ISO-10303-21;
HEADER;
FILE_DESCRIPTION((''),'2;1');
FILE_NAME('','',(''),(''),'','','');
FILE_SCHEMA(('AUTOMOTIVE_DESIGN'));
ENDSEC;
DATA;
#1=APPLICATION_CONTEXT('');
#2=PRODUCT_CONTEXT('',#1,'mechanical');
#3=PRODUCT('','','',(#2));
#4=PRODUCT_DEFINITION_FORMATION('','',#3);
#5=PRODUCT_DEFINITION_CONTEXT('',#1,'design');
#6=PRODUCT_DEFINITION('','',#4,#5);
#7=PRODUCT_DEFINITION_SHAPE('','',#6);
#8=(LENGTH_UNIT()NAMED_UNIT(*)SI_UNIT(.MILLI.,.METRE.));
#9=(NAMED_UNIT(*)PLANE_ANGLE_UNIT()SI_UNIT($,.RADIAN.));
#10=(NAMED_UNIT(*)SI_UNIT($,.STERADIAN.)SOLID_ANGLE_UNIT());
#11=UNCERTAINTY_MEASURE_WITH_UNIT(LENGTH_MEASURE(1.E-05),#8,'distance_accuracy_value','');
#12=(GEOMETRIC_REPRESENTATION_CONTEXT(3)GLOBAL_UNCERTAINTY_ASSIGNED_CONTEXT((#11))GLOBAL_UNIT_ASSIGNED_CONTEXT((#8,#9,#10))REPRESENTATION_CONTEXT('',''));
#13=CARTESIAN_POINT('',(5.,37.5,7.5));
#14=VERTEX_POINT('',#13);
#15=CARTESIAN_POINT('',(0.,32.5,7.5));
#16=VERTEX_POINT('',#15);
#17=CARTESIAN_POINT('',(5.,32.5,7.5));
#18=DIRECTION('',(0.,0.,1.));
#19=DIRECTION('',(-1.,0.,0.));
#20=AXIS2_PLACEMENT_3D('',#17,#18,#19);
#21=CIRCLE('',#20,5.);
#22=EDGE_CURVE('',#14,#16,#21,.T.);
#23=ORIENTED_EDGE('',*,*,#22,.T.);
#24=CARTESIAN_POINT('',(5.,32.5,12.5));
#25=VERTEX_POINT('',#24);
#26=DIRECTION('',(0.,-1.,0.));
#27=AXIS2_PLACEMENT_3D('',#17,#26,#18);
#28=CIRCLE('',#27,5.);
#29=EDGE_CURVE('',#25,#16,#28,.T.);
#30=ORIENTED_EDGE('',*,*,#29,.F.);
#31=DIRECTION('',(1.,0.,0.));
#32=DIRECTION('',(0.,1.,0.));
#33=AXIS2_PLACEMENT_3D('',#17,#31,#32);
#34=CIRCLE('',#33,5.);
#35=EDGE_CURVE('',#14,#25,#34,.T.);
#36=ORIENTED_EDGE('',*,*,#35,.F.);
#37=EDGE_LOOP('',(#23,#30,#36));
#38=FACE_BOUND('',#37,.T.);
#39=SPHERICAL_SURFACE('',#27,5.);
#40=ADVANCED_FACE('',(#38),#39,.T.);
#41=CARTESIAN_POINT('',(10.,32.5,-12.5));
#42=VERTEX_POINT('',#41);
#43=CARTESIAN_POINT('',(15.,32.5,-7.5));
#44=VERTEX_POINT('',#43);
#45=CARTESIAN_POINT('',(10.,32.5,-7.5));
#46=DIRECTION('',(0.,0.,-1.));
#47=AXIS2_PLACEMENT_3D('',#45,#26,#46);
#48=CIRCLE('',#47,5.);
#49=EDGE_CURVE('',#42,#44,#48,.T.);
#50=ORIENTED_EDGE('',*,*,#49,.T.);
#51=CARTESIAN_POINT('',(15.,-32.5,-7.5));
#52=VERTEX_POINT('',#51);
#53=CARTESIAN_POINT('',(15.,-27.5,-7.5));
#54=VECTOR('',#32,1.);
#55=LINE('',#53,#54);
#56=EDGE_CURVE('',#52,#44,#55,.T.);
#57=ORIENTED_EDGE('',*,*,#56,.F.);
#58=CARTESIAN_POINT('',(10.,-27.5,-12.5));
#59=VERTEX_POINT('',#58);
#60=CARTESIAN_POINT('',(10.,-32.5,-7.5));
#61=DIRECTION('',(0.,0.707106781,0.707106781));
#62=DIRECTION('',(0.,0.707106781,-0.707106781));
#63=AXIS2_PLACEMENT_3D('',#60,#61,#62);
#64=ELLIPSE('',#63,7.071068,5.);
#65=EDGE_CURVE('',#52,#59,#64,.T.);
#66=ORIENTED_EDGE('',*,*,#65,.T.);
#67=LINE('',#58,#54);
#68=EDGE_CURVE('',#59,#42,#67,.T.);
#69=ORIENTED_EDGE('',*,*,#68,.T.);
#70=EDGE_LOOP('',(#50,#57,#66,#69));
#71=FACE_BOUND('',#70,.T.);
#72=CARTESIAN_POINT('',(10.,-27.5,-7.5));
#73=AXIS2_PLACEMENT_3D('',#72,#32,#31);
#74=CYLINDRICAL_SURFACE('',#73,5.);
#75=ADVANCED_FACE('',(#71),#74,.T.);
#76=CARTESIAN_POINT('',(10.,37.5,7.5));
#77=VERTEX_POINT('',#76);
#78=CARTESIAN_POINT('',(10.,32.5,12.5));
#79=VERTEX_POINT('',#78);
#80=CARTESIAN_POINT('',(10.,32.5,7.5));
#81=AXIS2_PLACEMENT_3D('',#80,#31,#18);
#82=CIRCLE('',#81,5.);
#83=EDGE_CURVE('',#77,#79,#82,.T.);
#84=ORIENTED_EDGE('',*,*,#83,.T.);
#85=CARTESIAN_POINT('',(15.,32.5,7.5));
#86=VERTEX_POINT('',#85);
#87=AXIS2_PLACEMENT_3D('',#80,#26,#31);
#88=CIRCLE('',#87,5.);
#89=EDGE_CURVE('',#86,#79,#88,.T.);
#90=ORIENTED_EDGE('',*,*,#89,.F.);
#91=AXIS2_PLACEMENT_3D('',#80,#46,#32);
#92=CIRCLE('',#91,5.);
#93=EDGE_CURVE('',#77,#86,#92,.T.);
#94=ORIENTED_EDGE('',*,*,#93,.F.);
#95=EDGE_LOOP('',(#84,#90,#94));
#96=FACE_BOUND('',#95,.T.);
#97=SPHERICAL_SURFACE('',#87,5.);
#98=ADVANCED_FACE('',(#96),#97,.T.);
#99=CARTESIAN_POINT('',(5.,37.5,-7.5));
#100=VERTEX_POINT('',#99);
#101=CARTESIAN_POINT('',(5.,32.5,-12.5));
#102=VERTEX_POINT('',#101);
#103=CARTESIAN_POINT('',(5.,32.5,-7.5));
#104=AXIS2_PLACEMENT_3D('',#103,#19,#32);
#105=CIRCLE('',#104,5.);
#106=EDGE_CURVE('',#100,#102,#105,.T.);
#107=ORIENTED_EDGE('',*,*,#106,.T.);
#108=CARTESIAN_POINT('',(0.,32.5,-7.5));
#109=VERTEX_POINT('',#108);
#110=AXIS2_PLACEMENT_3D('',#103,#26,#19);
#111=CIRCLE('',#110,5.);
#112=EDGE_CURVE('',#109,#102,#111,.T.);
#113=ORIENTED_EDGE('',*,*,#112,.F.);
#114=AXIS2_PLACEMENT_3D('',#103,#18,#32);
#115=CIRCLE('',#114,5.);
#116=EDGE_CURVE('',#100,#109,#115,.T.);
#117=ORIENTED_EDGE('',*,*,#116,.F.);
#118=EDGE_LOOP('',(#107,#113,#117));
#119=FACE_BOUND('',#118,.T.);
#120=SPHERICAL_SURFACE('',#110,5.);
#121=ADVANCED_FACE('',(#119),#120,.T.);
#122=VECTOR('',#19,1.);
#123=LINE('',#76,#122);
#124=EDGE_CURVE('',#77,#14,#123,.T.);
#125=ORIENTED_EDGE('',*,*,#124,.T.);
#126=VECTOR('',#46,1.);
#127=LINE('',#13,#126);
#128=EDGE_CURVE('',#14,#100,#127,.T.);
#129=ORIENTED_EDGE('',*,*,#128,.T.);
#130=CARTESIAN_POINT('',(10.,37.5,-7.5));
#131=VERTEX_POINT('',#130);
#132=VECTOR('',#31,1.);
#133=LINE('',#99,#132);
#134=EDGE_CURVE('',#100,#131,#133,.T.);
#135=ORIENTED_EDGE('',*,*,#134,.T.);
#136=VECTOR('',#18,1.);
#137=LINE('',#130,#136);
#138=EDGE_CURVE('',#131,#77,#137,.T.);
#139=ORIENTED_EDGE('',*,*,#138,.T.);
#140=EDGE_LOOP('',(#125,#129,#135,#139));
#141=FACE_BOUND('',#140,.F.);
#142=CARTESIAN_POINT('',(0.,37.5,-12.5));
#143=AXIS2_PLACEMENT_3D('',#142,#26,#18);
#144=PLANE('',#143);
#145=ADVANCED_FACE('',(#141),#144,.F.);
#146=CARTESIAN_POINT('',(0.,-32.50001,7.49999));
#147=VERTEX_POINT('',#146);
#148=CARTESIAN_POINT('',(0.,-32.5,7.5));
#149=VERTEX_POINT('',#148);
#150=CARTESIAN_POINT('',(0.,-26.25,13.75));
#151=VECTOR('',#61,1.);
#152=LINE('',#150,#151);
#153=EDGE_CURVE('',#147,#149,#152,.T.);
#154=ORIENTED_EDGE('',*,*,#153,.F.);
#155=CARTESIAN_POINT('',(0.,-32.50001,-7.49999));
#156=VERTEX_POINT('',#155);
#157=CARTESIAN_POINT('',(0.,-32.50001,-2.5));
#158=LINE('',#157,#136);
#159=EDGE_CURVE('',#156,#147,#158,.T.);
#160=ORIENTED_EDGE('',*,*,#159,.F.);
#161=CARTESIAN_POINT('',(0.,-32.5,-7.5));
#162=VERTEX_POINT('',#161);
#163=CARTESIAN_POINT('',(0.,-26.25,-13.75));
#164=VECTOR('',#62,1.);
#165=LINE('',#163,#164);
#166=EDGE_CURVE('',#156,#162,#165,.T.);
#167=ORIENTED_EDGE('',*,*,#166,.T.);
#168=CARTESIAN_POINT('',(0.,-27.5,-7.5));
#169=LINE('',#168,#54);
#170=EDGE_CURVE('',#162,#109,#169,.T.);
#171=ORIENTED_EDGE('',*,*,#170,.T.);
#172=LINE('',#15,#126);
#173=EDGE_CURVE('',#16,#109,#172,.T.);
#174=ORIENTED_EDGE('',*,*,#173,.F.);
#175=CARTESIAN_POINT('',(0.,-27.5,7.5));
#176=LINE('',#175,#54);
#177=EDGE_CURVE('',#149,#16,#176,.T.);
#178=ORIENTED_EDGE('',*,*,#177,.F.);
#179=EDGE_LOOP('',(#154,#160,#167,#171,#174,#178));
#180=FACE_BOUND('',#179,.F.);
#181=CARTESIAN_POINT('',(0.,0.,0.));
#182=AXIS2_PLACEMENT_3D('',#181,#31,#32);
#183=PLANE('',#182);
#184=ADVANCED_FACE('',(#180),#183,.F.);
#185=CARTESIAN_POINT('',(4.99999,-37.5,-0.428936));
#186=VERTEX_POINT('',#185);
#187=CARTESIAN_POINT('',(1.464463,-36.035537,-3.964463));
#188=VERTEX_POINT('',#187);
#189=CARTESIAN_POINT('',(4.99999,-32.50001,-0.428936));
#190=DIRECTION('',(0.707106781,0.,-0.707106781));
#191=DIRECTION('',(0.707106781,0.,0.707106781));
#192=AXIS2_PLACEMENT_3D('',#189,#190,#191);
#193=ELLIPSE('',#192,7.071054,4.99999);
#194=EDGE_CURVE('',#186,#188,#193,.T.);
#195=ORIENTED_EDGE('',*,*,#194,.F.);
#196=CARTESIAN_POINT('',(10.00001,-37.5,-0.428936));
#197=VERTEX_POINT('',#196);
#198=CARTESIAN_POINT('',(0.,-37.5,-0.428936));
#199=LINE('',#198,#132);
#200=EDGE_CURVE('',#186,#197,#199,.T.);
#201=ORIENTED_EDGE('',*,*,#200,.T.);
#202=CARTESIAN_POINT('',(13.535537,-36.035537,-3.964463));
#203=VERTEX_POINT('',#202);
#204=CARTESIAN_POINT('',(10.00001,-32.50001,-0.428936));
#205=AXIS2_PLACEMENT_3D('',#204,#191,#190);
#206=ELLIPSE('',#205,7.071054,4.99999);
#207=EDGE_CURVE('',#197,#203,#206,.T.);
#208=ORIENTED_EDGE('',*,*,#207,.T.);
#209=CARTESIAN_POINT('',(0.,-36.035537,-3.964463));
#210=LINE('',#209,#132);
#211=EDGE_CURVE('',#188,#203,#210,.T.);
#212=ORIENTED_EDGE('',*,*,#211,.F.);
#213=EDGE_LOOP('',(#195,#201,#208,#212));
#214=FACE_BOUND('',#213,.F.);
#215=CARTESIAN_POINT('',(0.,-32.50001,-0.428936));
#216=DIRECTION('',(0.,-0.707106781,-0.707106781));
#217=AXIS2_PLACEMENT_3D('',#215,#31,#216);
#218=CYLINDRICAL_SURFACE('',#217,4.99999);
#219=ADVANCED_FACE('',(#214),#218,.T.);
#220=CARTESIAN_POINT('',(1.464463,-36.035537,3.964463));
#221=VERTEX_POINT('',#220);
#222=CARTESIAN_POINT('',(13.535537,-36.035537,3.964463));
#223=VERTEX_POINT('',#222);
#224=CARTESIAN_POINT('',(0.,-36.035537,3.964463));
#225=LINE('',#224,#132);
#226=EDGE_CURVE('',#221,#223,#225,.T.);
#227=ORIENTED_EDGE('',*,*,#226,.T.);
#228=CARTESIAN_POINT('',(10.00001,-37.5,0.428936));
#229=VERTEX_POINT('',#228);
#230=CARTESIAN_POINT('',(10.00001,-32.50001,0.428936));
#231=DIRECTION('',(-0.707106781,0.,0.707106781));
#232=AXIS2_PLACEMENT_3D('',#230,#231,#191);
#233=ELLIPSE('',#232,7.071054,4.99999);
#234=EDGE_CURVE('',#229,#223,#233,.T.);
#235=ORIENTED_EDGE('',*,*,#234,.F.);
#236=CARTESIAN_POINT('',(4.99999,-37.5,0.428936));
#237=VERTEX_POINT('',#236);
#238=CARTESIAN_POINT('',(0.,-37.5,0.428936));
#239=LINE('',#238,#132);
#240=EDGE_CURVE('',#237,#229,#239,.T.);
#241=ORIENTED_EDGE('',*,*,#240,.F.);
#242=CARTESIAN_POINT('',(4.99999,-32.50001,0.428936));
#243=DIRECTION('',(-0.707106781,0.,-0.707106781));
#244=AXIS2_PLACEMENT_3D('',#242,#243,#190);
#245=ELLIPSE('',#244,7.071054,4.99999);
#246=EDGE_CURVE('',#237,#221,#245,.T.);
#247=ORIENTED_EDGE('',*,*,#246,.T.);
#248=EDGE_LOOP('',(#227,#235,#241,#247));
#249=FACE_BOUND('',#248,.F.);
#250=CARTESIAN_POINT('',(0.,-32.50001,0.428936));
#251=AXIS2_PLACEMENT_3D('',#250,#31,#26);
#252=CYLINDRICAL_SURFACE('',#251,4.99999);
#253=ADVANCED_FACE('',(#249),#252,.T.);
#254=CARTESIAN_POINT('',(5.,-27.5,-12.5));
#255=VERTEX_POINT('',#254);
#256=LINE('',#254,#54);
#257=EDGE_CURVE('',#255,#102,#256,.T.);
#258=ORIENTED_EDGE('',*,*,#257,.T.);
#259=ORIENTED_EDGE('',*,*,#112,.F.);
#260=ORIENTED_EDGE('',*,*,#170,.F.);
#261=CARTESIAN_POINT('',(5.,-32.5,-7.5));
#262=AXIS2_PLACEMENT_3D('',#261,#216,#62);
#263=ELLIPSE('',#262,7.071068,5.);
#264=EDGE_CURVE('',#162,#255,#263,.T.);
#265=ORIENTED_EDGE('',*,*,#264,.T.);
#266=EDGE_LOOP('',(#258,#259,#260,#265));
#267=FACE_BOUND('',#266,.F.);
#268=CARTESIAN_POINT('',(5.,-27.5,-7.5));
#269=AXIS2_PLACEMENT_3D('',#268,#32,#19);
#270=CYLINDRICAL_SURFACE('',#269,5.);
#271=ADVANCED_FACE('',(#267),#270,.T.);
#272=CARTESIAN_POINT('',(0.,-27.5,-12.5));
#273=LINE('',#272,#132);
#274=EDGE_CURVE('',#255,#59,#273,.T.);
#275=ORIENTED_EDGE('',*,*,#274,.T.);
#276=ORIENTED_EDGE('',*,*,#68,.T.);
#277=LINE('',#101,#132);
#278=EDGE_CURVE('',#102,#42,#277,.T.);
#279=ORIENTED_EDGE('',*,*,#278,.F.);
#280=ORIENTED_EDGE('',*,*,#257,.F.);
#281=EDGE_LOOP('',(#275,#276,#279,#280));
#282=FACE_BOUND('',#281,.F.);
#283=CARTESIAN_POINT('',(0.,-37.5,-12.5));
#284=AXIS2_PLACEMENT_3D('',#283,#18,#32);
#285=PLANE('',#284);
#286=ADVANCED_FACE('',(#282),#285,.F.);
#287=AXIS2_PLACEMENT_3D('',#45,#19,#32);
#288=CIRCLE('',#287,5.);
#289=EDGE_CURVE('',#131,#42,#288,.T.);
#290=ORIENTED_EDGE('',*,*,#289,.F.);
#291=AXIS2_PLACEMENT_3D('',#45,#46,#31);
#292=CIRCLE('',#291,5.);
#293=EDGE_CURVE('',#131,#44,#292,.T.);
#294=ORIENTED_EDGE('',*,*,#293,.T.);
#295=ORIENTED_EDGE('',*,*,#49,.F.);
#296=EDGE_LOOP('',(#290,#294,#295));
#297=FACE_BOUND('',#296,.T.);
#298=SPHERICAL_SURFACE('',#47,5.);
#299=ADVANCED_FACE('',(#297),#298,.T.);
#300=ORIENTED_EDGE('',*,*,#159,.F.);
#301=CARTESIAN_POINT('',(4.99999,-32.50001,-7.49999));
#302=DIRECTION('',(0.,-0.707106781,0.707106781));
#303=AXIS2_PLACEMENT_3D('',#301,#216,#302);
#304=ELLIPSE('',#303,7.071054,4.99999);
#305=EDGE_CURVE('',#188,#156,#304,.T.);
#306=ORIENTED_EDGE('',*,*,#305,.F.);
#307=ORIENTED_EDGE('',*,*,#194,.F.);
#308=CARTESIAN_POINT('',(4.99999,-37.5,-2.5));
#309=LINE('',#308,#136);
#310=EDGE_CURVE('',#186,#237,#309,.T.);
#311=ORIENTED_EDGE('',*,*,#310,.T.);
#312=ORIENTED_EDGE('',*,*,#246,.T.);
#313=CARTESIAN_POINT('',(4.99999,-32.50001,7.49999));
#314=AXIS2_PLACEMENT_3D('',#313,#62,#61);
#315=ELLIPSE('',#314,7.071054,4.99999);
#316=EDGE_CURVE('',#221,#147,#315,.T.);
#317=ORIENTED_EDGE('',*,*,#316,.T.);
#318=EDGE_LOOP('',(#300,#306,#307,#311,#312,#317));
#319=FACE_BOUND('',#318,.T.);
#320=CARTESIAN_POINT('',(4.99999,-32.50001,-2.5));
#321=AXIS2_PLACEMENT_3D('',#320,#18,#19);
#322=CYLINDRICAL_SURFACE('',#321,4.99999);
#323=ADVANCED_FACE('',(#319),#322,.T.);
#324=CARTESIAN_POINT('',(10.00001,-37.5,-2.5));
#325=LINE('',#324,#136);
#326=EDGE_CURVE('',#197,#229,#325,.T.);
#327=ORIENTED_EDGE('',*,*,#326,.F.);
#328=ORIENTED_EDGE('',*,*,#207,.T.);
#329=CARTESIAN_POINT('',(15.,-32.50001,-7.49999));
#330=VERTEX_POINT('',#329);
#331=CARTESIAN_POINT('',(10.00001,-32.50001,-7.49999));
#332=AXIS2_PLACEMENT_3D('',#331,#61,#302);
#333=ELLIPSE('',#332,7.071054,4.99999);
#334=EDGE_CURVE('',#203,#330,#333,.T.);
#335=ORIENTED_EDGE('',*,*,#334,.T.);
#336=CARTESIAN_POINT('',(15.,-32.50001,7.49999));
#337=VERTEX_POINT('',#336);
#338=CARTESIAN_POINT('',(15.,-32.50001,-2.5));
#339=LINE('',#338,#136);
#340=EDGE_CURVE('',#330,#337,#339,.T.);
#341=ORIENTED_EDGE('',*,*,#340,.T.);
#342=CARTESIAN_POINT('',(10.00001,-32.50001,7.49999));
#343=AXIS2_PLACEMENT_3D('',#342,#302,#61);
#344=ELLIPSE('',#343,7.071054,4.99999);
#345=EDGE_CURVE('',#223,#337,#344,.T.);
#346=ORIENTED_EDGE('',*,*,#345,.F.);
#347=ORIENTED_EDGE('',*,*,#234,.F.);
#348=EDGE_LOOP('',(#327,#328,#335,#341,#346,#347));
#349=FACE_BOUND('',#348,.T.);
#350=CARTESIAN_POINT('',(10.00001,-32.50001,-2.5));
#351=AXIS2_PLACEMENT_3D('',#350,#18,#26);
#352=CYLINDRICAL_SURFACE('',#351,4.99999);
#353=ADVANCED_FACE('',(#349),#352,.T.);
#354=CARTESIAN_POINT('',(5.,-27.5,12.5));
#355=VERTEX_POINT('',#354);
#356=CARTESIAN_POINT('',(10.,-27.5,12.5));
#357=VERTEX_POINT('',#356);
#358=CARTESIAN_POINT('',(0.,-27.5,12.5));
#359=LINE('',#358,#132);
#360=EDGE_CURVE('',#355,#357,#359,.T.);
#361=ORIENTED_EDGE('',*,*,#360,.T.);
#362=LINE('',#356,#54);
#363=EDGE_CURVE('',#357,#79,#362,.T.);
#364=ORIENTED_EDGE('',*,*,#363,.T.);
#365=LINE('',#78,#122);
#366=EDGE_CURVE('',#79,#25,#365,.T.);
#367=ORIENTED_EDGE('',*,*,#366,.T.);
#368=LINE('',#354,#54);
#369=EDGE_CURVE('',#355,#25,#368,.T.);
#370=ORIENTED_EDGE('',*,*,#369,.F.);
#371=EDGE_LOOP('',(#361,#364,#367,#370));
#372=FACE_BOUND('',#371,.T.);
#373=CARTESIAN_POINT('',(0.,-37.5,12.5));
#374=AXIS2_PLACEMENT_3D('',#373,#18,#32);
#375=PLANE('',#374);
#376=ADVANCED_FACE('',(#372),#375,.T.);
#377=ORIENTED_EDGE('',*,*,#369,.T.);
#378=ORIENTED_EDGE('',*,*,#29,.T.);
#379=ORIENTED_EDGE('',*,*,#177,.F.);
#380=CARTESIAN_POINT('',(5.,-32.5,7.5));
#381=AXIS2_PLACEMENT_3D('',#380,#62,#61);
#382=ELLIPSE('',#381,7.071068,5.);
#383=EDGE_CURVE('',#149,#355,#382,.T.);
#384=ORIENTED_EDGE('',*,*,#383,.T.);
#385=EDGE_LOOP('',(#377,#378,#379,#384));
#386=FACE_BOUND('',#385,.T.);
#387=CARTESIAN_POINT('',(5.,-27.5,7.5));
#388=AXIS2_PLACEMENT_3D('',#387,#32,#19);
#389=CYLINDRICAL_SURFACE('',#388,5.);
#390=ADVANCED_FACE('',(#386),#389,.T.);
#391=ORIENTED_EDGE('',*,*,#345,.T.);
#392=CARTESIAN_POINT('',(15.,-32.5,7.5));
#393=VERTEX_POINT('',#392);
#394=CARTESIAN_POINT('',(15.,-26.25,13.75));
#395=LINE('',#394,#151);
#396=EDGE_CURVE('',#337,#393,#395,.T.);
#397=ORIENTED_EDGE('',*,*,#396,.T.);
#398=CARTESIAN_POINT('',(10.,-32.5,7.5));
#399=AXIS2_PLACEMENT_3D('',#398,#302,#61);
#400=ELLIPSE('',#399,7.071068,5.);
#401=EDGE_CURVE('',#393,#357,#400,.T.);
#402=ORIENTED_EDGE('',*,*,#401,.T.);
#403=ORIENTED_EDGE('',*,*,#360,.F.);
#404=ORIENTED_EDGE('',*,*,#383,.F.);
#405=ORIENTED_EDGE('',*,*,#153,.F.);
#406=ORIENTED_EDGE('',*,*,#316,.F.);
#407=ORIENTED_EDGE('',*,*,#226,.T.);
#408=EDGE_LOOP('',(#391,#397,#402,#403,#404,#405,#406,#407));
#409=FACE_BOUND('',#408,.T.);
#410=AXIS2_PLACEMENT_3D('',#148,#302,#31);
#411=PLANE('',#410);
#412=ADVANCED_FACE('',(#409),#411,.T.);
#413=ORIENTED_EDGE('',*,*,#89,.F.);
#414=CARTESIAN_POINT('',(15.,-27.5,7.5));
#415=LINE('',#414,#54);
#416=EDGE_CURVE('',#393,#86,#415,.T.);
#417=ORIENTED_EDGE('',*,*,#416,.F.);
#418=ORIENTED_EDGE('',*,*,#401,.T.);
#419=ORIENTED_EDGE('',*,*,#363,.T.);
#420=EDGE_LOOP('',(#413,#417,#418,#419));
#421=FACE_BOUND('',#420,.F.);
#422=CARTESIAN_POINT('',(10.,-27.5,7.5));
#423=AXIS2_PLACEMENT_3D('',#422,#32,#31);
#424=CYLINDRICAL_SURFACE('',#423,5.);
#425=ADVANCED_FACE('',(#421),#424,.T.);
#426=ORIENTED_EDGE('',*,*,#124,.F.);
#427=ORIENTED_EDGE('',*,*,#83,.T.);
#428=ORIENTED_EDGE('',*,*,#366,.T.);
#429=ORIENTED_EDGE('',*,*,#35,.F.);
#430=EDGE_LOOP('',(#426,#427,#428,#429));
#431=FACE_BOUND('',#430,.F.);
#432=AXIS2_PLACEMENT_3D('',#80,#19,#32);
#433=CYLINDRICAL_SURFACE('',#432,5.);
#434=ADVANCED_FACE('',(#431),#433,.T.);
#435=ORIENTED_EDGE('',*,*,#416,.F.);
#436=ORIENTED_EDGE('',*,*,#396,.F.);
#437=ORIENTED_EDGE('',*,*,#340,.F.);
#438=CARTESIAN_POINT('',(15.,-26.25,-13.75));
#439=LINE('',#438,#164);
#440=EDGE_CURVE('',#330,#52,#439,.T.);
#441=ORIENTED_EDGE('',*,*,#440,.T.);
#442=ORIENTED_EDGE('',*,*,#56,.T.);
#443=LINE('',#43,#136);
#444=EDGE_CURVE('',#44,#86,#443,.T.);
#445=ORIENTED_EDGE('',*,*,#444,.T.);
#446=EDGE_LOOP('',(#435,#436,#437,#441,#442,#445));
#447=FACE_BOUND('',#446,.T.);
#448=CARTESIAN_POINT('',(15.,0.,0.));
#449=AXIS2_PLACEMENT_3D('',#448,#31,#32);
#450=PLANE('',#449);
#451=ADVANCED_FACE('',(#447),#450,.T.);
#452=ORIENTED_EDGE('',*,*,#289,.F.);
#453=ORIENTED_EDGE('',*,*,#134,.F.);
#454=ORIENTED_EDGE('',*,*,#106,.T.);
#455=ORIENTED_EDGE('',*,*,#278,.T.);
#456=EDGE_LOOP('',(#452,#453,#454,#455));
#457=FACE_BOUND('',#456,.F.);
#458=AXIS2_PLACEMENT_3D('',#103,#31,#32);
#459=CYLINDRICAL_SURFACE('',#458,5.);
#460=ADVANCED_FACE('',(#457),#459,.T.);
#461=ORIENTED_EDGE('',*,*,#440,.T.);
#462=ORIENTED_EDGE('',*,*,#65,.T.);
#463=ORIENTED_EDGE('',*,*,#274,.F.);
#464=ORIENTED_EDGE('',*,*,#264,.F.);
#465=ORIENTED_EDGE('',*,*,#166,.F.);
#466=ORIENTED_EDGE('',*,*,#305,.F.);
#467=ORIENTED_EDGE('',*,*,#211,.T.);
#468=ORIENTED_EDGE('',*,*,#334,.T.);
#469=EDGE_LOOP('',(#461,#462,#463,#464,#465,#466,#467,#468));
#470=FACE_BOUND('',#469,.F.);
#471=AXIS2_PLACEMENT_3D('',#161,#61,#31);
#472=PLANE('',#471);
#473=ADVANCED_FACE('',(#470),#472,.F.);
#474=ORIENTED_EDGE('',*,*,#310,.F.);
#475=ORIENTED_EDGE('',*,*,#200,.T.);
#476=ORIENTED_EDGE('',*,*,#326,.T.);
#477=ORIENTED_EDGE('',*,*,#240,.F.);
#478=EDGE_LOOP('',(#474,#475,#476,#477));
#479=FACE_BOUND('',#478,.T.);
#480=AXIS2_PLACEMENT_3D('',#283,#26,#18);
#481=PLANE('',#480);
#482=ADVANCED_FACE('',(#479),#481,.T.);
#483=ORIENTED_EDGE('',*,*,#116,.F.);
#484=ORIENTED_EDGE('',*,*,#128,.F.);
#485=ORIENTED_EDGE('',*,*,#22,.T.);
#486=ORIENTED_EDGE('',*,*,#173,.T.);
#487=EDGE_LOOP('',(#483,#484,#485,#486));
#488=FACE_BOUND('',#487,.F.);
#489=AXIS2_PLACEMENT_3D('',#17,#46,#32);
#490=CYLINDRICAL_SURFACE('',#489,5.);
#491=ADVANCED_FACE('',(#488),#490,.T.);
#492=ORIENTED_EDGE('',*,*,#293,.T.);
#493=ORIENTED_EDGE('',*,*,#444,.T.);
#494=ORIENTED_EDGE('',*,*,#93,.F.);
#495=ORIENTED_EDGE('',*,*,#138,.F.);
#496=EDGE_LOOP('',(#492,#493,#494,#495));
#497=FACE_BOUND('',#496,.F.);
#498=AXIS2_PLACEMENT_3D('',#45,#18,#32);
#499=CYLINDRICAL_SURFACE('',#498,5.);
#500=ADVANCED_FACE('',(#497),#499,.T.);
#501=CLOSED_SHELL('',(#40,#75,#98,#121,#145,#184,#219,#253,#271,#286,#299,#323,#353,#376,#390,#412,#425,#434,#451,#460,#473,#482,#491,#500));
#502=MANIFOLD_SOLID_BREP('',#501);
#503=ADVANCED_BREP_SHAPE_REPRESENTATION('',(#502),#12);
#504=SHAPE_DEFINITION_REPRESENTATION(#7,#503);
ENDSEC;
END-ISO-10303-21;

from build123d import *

# Parameters (mm, degrees)
F0_W     = 75
F0_H     = 25
F1_DEPTH = 15
F2_SIZE  = 10
F3_SIZE  = 10
F4_R     = 5
F5_R     = 5
F6_R     = 4.99999


# Not quite as in the source:
# - a fillet or chamfer is up to 0.001 mm smaller than in the source, because OpenCascade refuses the exact size


with BuildPart() as f1:
    # F0 (on Right) → F1 (new body)
    with BuildSketch(Plane.YZ):
        Rectangle(F0_W, F0_H)
    extrude(amount=F1_DEPTH)

    # F2
    f2_edges = [f1.edges().sort_by_distance(p)[0] for p in [
        (7.5, -37.5, 12.5),
    ]]
    chamfer(f2_edges, length=F2_SIZE)

    # F3
    f3_edges = [f1.edges().sort_by_distance(p)[0] for p in [
        (7.5, -37.5, -12.5),
    ]]
    chamfer(f3_edges, length=F3_SIZE)

    # F4
    f4_edges = [f1.edges().sort_by_distance(p)[0] for p in [
        (15, 5, 12.5),
        (0, 5, 12.5),
        (15, 5, -12.5),
        (0, 5, -12.5),
    ]]
    fillet(f4_edges, radius=F4_R)

    # F5
    f5_edges = [f1.edges().sort_by_distance(p)[0] for p in [
        (7.5, 37.5, -12.5),
        (1.464466, 37.5, -11.035534),
        (13.535534, 37.5, -11.035534),
        (0, 37.5, 0),
        (15, 37.5, 0),
        (1.464466, 37.5, 11.035534),
        (13.535534, 37.5, 11.035534),
        (7.5, 37.5, 12.5),
    ]]
    fillet(f5_edges, radius=F5_R)

    # F6 (radius 5 in the source; OpenCascade refuses exactly that, so slightly less here)
    f6_edges = [f1.edges().sort_by_distance(p)[0] for p in [
        (0, -37.5, 0),
        (7.5, -37.5, -2.5),
        (7.5, -37.5, 2.5),
        (15, -37.5, 0),
    ]]
    fillet(f6_edges, radius=F6_R)


solid = f1.part
